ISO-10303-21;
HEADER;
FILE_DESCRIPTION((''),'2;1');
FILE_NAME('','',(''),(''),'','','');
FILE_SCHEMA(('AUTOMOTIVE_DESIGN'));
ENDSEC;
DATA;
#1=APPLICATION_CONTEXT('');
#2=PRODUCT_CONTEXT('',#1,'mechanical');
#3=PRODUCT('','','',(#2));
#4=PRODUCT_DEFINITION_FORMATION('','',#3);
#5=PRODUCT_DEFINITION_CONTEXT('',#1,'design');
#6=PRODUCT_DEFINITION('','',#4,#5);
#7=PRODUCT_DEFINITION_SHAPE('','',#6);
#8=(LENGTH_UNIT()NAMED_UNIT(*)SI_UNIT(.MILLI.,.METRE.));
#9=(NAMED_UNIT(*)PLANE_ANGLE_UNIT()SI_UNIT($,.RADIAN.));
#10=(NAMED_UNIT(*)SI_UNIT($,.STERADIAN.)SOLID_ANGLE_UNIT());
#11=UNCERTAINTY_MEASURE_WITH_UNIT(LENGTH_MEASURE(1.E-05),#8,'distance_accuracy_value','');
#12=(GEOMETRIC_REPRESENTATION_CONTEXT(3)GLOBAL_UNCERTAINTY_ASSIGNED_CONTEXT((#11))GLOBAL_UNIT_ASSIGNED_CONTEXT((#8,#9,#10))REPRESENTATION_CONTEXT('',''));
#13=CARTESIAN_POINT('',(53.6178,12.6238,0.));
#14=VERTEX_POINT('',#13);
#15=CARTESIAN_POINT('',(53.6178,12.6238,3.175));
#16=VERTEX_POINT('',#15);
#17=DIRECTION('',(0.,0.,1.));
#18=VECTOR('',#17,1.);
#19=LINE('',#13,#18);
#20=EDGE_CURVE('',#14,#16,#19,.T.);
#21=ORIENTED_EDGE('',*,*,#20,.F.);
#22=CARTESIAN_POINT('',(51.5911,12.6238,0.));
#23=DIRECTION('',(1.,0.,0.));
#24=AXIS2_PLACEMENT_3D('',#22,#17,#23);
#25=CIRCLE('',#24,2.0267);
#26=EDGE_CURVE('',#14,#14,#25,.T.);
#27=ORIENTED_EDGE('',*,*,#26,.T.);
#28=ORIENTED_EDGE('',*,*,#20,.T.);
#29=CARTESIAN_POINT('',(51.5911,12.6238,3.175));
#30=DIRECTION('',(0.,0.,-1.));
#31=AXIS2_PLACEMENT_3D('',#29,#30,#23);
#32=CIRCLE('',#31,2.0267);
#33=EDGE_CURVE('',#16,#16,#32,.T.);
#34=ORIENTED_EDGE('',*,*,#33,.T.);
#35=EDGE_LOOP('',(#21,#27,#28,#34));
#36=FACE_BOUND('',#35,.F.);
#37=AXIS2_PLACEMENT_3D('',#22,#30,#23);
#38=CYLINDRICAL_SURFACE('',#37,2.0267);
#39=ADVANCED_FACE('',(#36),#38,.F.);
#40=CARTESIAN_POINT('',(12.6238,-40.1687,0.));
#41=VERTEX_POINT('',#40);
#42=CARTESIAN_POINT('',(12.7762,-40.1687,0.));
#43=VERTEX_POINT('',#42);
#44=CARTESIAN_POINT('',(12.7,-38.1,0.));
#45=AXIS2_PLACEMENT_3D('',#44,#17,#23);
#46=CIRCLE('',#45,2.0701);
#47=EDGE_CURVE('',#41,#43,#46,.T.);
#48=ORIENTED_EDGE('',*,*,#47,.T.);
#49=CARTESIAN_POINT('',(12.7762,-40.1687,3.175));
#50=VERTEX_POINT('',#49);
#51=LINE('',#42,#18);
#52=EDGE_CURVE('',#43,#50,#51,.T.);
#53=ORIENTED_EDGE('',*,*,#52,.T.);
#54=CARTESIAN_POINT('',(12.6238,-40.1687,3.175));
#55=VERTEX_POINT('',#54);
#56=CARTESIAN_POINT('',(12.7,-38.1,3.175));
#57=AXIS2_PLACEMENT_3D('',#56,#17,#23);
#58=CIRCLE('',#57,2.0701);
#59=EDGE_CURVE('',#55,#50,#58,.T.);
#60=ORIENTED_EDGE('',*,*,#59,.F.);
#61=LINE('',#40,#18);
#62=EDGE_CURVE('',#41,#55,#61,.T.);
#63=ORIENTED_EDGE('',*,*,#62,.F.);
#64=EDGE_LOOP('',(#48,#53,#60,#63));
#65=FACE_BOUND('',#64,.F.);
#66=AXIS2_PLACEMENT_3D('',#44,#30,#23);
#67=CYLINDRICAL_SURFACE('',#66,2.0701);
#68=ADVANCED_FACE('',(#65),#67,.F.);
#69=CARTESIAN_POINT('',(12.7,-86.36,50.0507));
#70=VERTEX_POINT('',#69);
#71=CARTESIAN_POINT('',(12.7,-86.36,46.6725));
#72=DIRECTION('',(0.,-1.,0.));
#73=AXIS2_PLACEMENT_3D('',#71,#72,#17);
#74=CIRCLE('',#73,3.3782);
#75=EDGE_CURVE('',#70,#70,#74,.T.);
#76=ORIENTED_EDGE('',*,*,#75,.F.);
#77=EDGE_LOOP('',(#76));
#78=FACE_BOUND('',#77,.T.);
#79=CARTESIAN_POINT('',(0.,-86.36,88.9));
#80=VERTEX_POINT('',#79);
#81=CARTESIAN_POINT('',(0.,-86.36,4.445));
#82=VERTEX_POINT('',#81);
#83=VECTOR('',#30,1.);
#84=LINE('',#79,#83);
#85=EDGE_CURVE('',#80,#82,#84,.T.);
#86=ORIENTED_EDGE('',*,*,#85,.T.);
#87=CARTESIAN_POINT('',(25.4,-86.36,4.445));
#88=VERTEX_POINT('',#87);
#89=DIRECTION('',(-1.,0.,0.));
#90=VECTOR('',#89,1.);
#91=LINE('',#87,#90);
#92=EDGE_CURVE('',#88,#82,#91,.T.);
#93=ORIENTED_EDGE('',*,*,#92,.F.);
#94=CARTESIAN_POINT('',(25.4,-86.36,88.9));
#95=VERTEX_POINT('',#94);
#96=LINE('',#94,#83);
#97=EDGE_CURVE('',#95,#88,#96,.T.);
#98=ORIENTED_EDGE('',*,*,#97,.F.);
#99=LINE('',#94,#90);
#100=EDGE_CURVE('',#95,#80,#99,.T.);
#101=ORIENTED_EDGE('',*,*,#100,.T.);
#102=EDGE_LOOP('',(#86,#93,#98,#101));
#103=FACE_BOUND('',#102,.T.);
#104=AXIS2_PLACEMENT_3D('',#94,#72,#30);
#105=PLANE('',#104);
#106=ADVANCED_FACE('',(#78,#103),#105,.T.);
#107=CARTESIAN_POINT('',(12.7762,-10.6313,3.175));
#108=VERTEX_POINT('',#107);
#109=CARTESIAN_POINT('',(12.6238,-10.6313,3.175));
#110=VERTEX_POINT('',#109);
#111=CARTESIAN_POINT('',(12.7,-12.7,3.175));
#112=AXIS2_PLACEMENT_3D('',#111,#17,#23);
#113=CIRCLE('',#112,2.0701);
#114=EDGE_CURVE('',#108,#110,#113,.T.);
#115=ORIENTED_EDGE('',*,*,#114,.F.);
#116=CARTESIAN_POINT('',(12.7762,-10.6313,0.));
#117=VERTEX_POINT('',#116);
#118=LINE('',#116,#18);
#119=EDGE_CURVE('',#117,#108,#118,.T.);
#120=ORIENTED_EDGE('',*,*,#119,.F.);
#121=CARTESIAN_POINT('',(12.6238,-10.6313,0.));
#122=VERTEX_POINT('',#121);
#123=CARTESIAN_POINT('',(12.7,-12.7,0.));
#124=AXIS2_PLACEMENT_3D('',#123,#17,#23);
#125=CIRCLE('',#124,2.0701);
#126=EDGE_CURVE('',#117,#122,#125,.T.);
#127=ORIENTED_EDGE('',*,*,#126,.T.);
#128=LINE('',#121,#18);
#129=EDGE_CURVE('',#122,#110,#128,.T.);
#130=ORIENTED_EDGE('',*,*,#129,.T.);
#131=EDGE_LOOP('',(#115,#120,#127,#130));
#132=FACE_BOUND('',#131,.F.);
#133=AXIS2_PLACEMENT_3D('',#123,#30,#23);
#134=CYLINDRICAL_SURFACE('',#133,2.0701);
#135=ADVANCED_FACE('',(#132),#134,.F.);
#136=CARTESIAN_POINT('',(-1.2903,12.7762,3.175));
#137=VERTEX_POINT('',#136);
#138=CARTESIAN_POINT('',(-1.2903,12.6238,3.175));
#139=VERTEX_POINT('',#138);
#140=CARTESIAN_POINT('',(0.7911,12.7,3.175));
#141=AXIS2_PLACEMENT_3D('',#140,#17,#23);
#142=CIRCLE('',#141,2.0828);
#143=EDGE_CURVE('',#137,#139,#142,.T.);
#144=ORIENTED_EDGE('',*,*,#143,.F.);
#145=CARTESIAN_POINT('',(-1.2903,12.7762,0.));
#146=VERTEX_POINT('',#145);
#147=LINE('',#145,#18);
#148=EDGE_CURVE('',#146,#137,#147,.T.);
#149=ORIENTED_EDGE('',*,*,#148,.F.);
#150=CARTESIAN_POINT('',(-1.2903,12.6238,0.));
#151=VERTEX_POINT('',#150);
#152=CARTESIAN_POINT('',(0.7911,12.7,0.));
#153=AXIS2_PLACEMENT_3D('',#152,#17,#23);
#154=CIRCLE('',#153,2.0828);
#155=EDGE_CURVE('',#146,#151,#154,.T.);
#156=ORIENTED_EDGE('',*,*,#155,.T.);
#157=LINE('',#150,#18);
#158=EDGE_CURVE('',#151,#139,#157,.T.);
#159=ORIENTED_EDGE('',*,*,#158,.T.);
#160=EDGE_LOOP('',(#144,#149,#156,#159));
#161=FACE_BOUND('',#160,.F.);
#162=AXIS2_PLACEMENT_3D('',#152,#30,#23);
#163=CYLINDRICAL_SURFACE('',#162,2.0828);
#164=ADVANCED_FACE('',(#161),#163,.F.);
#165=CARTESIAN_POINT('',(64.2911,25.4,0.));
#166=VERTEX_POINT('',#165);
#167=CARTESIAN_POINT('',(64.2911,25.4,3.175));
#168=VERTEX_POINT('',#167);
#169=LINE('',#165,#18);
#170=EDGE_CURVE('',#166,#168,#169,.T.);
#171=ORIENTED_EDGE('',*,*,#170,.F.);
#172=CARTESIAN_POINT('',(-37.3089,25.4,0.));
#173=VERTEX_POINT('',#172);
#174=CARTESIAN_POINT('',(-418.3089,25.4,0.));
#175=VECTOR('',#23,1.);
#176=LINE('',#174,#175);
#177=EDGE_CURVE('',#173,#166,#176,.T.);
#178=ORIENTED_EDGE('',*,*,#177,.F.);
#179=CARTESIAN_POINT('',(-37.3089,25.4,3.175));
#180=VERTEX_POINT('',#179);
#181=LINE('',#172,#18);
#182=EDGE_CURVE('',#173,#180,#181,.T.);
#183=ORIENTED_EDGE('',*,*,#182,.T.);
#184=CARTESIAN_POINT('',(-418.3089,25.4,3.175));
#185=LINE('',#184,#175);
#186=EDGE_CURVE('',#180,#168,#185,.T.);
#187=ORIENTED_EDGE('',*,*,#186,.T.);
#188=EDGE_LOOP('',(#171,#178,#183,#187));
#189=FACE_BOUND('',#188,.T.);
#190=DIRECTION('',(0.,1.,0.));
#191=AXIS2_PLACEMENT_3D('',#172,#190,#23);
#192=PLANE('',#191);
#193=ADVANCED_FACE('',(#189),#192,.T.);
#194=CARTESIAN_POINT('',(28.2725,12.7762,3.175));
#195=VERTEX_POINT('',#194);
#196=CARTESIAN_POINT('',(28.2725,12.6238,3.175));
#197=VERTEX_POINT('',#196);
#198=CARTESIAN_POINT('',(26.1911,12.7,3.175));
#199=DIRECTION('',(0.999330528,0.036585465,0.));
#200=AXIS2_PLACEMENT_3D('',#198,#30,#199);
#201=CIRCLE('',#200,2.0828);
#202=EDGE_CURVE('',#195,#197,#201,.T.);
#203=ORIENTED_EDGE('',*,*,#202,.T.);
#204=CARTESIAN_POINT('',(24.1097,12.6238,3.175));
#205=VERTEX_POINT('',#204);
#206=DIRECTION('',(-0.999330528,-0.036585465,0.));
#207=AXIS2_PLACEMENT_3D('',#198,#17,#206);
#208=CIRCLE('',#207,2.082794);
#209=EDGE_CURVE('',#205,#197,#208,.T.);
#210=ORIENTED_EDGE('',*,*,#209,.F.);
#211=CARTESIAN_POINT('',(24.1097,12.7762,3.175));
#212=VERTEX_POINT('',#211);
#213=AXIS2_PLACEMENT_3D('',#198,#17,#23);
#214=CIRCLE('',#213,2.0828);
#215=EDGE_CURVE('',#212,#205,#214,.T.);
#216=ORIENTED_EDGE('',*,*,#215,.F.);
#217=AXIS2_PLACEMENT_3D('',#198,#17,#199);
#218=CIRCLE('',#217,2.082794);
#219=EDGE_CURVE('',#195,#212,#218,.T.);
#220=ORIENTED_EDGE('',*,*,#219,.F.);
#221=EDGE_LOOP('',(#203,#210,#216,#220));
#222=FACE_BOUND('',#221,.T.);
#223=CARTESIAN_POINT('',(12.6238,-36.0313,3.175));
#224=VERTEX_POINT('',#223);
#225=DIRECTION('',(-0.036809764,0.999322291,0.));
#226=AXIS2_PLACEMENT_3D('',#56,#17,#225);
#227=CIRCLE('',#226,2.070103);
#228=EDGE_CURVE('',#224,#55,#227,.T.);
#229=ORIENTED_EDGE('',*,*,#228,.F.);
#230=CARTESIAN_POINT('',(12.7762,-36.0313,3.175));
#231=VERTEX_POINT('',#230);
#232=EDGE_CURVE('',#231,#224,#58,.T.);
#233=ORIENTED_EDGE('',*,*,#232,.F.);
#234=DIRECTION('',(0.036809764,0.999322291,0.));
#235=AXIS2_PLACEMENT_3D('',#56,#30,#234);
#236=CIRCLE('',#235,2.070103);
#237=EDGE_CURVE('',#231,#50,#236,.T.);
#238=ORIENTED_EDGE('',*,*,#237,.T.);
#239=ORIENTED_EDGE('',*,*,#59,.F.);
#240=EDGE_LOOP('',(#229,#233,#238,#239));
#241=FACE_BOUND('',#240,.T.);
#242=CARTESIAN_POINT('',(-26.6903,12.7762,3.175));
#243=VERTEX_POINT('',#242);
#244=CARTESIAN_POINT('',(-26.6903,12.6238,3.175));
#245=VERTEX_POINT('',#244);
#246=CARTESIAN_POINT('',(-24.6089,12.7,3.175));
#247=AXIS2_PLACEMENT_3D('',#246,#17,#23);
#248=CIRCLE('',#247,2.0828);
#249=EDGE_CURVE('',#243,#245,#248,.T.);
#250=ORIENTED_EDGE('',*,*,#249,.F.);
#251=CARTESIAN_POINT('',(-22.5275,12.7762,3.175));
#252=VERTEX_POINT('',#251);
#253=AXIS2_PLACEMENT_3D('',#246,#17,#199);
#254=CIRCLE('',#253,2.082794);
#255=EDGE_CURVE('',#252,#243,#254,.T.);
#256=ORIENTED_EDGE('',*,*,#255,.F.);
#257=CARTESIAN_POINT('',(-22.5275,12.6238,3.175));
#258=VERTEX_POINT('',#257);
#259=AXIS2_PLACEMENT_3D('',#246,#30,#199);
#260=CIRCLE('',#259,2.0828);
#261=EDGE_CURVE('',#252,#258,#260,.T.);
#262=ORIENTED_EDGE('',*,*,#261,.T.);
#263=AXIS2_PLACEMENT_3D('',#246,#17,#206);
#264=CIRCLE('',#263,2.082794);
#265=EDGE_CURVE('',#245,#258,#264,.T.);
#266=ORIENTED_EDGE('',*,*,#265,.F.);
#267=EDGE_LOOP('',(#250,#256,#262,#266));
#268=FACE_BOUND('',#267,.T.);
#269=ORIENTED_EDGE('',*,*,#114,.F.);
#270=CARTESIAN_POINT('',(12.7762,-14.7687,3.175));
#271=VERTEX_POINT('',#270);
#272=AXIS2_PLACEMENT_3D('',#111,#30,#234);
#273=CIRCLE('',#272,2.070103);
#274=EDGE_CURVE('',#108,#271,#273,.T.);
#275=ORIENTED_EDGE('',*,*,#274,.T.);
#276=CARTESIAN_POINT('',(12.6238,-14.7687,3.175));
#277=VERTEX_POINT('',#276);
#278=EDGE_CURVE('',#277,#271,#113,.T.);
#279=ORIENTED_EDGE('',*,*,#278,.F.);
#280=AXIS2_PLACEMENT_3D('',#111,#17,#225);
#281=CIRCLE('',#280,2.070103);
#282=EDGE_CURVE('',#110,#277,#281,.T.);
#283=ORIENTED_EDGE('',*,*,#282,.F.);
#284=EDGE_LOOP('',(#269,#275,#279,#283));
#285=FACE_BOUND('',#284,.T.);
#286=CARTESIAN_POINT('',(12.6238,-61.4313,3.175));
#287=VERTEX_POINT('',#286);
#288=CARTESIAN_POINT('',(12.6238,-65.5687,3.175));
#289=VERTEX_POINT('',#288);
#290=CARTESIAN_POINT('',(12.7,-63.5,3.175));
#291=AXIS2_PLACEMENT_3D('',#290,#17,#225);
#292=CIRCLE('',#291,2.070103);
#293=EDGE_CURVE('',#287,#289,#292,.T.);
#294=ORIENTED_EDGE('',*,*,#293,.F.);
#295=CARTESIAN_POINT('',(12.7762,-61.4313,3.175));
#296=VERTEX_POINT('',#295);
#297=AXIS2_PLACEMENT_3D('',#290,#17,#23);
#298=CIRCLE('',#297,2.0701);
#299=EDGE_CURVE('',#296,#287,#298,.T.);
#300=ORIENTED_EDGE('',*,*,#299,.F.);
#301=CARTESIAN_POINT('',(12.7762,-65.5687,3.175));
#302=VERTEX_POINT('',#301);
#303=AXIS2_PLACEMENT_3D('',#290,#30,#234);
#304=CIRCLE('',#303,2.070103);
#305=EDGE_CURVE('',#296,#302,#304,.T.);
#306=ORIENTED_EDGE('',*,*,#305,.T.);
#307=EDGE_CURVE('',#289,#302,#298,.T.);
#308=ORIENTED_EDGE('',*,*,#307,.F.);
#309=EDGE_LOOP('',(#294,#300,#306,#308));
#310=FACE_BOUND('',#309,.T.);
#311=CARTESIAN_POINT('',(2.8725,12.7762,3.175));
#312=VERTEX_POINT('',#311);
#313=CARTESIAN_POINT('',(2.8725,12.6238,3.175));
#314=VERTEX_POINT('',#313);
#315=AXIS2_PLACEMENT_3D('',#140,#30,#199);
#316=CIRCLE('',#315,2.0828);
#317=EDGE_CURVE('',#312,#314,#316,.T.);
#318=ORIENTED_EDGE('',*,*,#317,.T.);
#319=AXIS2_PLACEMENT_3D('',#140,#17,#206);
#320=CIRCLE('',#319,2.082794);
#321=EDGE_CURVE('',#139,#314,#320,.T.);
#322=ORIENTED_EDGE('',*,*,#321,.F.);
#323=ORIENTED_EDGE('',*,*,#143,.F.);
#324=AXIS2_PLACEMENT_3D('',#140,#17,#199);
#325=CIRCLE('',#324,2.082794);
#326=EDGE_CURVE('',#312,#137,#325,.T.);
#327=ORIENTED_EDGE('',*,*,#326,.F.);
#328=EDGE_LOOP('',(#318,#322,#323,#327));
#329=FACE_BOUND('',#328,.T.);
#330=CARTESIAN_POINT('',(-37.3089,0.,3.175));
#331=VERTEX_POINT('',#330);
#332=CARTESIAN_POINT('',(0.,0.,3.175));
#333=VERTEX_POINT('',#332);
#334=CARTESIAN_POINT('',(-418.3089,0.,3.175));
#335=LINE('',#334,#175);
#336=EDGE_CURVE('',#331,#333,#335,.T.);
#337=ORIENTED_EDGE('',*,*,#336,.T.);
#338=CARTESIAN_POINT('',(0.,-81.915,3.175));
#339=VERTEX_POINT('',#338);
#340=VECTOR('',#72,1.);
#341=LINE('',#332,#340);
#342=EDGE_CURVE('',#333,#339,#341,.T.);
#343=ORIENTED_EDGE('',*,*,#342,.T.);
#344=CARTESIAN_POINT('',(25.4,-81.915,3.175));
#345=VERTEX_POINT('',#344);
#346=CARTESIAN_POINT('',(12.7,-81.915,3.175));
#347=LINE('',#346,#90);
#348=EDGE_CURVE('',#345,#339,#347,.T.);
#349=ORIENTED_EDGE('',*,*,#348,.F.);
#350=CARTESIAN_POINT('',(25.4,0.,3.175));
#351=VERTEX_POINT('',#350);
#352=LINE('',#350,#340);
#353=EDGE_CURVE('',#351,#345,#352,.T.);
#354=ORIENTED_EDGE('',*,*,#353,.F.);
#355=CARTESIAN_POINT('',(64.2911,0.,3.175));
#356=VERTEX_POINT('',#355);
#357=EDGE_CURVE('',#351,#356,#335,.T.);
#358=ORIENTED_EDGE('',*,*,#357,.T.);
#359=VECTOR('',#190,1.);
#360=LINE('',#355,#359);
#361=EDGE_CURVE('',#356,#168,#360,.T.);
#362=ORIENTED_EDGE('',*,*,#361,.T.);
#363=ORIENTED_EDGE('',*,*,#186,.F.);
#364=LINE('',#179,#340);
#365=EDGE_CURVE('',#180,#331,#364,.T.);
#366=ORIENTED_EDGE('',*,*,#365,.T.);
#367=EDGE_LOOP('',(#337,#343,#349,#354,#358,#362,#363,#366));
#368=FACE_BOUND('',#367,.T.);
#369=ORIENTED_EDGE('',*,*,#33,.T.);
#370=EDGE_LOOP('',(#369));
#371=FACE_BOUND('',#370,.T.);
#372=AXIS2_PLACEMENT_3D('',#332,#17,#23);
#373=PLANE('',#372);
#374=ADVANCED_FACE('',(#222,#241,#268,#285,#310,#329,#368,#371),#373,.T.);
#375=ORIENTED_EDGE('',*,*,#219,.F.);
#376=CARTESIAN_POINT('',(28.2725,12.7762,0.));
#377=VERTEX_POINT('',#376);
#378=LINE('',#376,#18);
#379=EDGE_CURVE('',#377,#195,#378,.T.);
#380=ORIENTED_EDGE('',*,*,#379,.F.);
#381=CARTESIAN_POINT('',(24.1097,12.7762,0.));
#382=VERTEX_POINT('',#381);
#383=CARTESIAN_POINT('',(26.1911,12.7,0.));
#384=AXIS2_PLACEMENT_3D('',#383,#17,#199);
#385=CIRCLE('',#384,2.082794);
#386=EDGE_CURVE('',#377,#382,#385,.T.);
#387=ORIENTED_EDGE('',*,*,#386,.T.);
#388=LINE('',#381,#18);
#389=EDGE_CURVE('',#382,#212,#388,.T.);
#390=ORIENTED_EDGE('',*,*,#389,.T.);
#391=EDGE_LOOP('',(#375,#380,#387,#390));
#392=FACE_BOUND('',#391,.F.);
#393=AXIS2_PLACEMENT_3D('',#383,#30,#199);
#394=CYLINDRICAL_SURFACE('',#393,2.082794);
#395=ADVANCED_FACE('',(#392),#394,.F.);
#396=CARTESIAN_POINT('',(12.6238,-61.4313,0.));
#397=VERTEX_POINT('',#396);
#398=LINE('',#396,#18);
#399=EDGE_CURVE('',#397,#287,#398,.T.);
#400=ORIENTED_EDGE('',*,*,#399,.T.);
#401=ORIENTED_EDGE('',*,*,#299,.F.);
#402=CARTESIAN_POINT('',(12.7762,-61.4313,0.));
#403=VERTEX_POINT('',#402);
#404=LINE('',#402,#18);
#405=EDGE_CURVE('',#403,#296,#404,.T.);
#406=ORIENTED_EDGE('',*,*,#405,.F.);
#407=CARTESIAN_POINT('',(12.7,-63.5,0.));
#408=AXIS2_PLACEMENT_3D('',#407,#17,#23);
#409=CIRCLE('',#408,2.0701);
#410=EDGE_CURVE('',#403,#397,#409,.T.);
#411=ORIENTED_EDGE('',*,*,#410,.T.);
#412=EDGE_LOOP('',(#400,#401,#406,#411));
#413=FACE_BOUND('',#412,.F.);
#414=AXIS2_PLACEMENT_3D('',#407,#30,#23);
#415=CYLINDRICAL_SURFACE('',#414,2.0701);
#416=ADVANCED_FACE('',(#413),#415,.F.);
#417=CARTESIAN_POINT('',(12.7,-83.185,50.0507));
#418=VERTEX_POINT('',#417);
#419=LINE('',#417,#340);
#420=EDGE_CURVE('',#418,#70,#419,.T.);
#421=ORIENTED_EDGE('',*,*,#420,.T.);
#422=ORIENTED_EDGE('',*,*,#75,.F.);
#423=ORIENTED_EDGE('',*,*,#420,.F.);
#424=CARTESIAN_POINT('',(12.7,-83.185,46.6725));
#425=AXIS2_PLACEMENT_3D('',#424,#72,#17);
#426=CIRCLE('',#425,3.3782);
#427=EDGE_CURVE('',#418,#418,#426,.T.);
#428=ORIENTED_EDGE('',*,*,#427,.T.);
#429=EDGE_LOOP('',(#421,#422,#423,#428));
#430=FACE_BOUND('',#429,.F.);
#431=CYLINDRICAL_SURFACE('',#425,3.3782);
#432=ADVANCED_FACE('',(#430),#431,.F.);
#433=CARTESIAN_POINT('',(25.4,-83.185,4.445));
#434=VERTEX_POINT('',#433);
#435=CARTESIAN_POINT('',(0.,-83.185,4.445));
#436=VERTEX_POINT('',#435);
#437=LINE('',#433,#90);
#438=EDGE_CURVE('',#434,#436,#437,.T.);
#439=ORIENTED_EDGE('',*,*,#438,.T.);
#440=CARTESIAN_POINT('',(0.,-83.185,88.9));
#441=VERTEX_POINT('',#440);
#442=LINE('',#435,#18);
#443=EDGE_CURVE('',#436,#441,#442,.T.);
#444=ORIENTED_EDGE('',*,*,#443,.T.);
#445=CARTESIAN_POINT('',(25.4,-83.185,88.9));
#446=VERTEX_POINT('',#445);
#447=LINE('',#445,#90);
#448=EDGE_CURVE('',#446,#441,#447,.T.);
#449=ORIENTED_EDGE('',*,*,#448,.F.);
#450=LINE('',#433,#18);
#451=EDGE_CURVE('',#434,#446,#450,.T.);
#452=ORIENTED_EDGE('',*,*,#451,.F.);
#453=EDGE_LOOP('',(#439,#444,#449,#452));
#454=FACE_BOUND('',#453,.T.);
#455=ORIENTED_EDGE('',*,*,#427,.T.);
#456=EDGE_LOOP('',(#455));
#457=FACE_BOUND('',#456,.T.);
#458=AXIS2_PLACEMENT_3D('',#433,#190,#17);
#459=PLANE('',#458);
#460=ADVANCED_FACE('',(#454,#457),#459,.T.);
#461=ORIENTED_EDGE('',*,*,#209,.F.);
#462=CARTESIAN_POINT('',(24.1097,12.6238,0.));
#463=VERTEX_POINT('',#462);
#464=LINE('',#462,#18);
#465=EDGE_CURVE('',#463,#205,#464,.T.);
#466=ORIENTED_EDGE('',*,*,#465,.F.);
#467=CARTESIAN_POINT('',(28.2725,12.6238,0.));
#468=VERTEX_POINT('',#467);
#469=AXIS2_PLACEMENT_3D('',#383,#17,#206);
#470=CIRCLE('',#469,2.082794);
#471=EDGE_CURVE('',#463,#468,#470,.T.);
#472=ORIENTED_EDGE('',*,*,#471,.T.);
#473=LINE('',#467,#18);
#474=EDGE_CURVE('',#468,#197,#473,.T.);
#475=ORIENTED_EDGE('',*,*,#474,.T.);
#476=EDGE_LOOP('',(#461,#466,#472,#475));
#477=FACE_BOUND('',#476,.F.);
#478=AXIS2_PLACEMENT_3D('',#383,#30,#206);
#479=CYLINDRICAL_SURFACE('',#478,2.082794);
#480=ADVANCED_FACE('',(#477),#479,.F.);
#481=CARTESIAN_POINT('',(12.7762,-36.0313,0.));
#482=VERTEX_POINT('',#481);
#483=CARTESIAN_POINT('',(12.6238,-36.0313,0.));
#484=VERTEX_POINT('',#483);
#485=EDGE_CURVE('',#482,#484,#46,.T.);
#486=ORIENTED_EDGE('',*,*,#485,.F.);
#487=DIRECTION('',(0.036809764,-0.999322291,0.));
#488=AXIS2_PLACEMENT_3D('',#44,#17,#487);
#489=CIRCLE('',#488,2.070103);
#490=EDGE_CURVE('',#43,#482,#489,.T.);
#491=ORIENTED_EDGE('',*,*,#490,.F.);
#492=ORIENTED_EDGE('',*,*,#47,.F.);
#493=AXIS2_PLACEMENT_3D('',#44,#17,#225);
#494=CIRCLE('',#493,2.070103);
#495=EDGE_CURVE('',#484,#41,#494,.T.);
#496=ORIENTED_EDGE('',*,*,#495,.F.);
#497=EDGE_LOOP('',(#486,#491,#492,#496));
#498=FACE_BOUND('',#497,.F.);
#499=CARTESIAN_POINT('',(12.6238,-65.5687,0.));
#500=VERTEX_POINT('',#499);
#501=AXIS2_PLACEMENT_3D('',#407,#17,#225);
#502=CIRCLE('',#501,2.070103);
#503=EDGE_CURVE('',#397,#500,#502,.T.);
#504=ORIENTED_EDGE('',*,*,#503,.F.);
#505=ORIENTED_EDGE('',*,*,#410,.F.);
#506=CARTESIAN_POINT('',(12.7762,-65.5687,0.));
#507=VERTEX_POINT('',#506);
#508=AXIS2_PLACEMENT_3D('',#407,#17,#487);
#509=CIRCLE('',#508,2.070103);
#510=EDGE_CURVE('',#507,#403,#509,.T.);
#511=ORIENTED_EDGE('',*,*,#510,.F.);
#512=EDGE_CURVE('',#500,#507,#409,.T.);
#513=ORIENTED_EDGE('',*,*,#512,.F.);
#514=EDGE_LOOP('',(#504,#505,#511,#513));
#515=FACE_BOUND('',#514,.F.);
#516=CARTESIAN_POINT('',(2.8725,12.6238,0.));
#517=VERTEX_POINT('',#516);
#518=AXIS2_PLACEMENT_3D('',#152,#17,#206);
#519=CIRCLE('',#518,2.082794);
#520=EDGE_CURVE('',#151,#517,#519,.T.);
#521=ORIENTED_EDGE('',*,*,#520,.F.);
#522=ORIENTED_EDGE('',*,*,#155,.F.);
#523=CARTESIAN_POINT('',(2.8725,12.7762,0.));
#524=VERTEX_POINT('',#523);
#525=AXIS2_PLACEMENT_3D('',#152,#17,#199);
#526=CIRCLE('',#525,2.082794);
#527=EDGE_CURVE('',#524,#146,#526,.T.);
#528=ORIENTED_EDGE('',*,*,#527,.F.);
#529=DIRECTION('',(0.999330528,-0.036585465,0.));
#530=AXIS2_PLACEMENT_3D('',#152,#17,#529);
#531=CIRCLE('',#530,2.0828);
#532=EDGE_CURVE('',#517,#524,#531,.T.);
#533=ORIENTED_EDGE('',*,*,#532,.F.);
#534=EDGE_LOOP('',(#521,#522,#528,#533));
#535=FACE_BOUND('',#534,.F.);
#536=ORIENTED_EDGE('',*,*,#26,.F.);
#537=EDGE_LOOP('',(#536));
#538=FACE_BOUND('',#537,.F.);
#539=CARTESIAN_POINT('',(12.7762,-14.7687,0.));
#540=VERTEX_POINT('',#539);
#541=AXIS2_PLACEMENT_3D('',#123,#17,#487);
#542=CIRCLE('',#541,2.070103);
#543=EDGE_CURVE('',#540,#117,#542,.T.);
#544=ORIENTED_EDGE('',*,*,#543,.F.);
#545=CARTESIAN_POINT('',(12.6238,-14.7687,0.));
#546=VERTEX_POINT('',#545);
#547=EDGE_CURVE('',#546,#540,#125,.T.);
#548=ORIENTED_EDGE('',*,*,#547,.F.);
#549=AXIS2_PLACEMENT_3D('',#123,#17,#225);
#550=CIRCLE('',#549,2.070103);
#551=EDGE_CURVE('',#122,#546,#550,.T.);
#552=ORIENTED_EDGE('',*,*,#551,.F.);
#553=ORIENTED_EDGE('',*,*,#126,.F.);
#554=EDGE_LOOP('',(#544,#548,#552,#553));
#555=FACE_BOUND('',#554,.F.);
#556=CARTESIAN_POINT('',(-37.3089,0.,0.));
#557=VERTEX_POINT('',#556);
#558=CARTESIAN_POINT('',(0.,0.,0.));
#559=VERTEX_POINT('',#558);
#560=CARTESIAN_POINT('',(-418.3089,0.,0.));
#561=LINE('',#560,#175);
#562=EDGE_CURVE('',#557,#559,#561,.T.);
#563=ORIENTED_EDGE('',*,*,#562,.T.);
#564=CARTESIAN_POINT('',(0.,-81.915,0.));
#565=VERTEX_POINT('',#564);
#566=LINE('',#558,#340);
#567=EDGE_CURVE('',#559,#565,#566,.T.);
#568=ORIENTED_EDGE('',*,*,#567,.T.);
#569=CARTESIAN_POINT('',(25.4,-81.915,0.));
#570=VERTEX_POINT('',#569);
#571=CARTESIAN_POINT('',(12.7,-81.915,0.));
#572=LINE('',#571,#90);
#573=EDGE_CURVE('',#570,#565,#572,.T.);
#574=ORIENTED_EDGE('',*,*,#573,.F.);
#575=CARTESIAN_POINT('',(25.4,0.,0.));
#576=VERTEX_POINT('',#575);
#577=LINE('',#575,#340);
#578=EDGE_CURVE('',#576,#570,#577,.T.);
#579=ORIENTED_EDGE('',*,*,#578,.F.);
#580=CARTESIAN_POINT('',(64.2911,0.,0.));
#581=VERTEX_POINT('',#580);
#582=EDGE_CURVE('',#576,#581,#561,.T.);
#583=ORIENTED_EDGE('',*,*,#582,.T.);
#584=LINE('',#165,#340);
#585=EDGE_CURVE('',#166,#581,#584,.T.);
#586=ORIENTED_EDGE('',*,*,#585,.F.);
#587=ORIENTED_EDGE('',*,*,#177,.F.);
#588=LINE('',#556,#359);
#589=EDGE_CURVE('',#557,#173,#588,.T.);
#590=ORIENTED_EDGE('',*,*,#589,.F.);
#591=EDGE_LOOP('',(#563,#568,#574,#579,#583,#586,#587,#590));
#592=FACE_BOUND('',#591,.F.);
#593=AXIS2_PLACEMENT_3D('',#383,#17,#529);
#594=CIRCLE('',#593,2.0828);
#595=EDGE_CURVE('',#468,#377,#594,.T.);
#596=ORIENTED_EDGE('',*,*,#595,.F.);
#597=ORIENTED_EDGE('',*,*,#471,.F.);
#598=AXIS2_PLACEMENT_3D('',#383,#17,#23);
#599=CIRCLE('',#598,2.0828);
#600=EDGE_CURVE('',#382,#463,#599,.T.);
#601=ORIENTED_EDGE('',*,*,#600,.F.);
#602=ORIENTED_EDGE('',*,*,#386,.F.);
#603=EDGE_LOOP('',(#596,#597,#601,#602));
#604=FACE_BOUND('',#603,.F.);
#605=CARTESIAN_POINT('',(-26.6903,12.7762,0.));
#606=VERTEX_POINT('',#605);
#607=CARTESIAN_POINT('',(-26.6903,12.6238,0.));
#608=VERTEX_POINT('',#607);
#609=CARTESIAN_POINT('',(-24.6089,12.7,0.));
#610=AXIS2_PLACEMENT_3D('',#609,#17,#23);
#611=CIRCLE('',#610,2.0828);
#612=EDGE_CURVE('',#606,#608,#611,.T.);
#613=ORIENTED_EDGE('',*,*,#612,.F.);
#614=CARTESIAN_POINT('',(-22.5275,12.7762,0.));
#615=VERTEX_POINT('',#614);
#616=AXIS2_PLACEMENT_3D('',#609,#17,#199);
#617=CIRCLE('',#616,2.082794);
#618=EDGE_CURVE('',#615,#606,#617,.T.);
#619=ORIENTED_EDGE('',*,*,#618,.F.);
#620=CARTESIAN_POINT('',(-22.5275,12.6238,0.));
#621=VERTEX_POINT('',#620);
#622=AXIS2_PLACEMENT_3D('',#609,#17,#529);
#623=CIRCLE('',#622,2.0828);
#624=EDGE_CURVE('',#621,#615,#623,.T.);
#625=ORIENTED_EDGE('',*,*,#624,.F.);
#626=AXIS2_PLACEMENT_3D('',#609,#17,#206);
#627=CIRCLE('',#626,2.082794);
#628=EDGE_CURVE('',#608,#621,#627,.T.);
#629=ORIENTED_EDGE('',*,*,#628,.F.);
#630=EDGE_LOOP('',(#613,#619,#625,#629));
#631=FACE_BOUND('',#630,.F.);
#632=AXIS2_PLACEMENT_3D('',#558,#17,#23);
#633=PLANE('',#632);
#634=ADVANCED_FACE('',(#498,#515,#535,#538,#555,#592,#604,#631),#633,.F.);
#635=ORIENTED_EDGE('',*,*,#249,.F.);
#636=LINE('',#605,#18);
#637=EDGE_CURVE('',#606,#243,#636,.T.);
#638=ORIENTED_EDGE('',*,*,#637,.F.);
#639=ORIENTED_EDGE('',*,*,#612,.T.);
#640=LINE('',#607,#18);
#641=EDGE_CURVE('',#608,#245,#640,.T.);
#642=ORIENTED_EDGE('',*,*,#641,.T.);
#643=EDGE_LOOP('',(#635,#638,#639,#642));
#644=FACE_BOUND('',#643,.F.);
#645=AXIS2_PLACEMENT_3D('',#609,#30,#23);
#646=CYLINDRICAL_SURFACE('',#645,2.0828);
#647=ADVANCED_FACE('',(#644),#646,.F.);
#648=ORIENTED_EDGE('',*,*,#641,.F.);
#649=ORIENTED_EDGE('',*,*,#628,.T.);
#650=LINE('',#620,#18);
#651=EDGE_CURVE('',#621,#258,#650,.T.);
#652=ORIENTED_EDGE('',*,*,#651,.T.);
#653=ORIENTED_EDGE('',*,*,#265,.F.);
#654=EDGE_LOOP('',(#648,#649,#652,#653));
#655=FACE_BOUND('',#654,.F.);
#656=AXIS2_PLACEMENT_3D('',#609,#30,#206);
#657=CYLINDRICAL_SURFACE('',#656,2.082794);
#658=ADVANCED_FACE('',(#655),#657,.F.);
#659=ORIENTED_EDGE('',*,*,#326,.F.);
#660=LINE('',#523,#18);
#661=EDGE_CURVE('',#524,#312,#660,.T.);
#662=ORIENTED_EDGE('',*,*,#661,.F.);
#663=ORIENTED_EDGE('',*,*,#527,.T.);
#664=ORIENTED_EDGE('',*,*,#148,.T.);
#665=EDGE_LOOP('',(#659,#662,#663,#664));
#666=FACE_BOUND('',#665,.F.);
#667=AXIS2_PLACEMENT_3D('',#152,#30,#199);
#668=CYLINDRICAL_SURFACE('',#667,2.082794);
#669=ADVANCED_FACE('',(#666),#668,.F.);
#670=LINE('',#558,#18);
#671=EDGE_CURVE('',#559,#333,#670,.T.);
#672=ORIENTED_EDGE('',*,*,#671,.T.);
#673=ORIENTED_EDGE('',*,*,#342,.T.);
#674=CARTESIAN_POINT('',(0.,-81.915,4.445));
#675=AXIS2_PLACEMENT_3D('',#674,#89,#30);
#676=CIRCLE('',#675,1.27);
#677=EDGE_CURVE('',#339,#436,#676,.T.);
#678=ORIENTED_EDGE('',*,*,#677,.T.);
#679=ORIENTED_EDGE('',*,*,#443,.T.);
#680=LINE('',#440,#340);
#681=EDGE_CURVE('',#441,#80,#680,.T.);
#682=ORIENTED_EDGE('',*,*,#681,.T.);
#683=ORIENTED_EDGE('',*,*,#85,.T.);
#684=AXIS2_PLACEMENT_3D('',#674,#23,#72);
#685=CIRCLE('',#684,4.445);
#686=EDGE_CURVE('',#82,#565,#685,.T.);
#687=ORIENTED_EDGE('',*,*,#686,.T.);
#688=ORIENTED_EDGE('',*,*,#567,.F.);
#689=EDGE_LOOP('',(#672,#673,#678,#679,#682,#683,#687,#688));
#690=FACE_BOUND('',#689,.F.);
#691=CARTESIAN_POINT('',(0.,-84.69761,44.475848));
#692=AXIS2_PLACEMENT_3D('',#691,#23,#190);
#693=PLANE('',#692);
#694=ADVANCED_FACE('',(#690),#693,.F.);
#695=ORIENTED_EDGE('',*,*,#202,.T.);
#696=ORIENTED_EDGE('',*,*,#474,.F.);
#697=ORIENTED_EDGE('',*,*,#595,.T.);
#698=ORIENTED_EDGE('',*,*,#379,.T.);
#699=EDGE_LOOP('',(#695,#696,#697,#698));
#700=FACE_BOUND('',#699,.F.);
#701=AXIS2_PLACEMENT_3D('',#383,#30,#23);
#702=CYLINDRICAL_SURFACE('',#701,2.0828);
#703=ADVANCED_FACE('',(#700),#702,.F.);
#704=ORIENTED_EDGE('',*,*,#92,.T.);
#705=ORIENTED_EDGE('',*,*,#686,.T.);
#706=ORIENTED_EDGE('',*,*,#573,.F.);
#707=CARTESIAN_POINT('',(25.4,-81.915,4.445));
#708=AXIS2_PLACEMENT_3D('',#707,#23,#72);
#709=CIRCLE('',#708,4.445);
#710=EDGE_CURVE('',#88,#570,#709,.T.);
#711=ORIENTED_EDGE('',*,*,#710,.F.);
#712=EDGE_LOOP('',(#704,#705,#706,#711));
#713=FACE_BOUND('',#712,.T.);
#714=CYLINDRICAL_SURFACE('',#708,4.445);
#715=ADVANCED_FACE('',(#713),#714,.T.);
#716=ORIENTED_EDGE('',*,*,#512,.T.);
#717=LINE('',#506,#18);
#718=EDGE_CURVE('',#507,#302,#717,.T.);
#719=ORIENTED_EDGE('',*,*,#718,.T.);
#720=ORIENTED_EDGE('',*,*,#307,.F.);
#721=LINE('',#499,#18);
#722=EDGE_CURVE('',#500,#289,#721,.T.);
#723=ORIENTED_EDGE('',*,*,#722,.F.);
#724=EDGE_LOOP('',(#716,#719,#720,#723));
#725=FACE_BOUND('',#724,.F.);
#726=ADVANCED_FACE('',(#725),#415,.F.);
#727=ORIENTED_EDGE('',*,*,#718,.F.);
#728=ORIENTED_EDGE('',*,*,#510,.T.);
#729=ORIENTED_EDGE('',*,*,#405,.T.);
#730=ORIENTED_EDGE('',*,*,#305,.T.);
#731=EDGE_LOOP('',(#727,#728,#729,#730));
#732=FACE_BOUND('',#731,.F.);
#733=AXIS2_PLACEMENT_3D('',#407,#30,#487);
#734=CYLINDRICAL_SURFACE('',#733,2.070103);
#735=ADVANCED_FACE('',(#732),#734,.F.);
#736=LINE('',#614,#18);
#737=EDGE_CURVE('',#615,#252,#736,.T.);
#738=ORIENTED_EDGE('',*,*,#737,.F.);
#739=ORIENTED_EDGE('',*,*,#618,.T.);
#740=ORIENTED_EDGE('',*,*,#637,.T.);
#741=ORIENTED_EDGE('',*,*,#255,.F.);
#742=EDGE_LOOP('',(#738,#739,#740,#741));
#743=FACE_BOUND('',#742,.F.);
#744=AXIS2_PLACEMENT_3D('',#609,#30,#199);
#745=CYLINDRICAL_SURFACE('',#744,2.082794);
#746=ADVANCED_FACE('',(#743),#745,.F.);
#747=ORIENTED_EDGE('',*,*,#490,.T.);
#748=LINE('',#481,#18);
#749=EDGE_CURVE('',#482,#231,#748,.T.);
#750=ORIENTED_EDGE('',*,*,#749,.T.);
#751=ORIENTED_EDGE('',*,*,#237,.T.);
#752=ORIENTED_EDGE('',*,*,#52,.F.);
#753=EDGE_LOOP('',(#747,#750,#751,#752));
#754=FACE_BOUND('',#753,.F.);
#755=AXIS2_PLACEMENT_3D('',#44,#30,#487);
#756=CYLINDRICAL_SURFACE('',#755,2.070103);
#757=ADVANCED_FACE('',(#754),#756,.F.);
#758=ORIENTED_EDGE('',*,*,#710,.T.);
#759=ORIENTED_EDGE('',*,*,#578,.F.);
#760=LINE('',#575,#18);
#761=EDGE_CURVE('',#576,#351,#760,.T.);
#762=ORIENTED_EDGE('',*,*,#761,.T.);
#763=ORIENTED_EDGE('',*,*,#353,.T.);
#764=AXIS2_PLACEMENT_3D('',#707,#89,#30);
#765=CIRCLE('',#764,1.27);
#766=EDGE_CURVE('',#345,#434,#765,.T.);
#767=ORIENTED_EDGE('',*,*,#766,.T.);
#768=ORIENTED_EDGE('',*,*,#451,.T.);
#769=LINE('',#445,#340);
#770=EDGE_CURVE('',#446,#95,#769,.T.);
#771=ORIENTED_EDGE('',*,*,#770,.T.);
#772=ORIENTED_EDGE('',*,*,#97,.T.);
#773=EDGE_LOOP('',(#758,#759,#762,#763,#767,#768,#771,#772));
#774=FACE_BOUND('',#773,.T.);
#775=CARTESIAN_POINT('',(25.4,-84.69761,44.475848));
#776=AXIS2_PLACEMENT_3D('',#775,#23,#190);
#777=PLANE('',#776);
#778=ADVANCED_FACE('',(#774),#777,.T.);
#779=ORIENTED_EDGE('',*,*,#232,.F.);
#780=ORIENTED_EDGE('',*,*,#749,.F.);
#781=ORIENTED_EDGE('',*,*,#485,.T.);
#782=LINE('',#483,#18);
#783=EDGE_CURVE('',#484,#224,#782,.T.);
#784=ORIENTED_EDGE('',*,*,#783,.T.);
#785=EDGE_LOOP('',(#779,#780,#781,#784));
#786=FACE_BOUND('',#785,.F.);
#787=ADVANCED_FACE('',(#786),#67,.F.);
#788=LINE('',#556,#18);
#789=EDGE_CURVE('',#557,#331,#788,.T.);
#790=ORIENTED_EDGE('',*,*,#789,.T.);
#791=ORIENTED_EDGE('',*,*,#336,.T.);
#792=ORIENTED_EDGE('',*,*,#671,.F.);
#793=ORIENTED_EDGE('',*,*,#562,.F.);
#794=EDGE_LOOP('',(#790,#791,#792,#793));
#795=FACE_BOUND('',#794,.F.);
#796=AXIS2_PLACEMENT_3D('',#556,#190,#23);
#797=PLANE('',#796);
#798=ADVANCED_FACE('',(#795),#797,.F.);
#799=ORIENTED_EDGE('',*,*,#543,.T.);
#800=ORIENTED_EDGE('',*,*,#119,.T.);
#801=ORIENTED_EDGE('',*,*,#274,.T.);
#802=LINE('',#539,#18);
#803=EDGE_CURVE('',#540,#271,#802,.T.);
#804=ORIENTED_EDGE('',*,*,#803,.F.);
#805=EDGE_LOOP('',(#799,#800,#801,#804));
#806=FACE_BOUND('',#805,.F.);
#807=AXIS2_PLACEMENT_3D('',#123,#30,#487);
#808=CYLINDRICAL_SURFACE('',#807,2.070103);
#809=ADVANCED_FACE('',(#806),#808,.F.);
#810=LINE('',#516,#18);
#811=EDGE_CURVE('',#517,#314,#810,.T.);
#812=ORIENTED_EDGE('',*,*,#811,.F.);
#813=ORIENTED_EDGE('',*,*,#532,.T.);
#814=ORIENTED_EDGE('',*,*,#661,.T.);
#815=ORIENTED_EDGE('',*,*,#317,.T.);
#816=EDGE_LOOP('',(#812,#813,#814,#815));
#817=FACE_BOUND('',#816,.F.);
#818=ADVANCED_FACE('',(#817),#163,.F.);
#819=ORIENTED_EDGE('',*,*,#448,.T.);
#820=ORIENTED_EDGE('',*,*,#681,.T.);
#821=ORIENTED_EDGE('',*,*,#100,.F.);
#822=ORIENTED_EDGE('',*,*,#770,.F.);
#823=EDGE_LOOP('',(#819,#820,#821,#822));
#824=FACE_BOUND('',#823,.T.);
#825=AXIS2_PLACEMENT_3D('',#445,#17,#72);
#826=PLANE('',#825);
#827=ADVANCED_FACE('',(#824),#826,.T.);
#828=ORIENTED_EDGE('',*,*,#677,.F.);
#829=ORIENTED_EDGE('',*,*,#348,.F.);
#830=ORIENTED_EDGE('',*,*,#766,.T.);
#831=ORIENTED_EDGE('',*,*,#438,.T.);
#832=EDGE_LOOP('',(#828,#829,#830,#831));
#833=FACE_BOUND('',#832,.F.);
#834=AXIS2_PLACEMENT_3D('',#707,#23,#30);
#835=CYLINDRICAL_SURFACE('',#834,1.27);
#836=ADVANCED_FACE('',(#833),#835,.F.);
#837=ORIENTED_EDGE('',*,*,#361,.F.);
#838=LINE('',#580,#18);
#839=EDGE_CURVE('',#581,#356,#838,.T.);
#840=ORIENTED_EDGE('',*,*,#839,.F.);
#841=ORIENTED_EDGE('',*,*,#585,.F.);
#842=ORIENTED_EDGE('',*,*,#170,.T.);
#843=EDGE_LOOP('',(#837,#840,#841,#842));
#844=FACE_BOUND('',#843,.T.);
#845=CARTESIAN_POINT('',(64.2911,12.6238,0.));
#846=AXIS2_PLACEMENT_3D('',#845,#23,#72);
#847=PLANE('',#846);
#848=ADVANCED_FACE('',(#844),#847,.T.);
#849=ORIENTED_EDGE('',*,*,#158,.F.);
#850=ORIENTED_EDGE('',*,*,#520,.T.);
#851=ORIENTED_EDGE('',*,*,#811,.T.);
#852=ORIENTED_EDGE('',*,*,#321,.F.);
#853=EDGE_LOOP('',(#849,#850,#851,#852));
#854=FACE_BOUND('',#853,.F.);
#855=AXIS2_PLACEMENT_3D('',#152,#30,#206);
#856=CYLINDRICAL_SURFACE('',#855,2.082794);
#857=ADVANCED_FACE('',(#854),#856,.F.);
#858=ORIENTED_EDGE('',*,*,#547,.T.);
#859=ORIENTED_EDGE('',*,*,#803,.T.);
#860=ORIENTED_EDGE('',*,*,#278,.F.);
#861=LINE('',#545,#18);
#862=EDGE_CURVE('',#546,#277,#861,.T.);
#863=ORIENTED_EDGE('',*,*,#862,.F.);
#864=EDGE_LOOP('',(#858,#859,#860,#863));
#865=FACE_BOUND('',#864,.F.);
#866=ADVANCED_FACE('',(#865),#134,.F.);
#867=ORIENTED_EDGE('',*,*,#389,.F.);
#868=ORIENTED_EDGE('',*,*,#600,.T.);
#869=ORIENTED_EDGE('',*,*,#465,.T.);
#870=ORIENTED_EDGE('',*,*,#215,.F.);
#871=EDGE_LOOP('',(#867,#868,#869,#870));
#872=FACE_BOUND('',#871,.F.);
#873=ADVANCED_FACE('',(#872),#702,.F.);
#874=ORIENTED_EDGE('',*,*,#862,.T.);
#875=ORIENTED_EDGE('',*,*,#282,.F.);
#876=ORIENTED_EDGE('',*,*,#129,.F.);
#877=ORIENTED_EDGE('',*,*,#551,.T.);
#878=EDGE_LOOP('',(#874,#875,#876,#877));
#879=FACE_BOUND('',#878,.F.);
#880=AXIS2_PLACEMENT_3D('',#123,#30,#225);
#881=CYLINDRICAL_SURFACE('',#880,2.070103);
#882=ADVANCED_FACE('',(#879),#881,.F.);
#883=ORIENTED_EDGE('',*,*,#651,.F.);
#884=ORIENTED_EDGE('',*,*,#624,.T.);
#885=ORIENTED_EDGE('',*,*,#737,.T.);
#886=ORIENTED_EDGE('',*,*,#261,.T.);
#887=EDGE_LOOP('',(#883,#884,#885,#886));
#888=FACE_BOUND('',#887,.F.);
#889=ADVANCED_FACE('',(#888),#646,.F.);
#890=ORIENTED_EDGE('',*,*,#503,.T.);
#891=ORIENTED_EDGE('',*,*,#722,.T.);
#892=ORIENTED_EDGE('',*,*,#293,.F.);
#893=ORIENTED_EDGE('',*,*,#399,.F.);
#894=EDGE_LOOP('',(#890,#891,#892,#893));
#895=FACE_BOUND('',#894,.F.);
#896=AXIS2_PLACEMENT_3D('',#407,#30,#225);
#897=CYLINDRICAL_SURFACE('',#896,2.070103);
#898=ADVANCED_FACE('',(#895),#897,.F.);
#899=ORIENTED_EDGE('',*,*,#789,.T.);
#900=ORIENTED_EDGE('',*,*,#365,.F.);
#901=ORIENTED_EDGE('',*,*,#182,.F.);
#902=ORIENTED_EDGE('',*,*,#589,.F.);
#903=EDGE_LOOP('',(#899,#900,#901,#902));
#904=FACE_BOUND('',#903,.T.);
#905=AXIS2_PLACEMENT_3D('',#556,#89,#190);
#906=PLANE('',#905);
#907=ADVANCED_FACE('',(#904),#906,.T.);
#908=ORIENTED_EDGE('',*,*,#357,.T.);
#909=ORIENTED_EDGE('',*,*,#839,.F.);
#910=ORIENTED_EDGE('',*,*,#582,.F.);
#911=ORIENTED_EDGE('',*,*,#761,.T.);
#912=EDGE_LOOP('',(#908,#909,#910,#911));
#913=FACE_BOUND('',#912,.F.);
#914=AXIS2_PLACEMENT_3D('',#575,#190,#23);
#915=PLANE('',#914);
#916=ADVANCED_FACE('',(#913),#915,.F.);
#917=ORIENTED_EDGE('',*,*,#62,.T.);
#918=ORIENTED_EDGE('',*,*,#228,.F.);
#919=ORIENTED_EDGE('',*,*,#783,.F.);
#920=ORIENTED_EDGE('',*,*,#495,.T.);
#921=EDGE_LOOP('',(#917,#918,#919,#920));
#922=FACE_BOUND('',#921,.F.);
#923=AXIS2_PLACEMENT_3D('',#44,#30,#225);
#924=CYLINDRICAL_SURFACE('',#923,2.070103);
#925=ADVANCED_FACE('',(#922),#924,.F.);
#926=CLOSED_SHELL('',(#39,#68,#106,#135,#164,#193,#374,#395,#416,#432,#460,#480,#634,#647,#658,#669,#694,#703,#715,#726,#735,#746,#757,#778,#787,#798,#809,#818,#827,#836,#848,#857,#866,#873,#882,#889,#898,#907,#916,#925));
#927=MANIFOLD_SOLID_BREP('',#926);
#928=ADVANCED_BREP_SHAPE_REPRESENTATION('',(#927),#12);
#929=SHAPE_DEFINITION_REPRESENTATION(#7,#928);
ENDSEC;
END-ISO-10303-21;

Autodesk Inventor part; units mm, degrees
ref_plane "YZ Plane" through (0, 0, 0) normal (1, 0, 0) x (0, 1, 0)
ref_plane "XZ Plane" through (0, 0, 0) normal (0, 1, 0) x (-1, 0, 0)
ref_plane "XY Plane" through (0, 0, 0) normal (0, 0, 1) x (1, 0, 0)
sketch "Sketch1" plane through (0, 0, 0) normal (0, 0, 1) x (1, 0, 0)
  line L0 (0, -83.185) -> (12.6238, -83.185)
  line L1 (12.6238, -83.185) -> (12.6238, -65.5687)
  arc A0 (12.6238, -61.4313) -> (12.6238, -65.5687) centre (12.7, -63.5) ccw
  line L2 (12.6238, -61.4313) -> (12.6238, -40.1687)
  arc A1 (12.6238, -36.0313) -> (12.6238, -40.1687) centre (12.7, -38.1) ccw
  line L3 (12.6238, -36.0313) -> (12.6238, -14.7687)
  arc A2 (12.6238, -10.6313) -> (12.6238, -14.7687) centre (12.7, -12.7) ccw
  line L4 (12.6238, -10.6313) -> (12.6238, 0)
  line L5 (0, 0) -> (12.6238, 0)
  line L6 (0, 0) -> (0, -83.185)
  line L7 (12.7762, -83.185) -> (25.4, -83.185)
  line L8 (25.4, 0) -> (25.4, -83.185)
  line L9 (12.7762, 0) -> (25.4, 0)
  line L10 (12.7762, -10.6313) -> (12.7762, 0)
  arc A3 (12.7762, -14.7687) -> (12.7762, -10.6313) centre (12.7, -12.7) ccw
  line L11 (12.7762, -36.0313) -> (12.7762, -14.7687)
  arc A4 (12.7762, -40.1687) -> (12.7762, -36.0313) centre (12.7, -38.1) ccw
  line L12 (12.7762, -61.4313) -> (12.7762, -40.1687)
  arc A5 (12.7762, -65.5687) -> (12.7762, -61.4313) centre (12.7, -63.5) ccw
  line L13 (12.7762, -83.185) -> (12.7762, -65.5687)
  line L14 (216.6911, 0) -> (216.6911, 12.6238)
  line L15 (216.6911, 12.6238) -> (206.0725, 12.6238)
  arc A6 (201.9097, 12.6238) -> (206.0725, 12.6238) centre (203.9911, 12.7) ccw
  line L16 (201.9097, 12.6238) -> (180.6725, 12.6238)
  arc A7 (176.5097, 12.6238) -> (180.6725, 12.6238) centre (178.5911, 12.7) ccw
  line L17 (176.5097, 12.6238) -> (155.2725, 12.6238)
  arc A8 (151.1097, 12.6238) -> (155.2725, 12.6238) centre (153.1911, 12.7) ccw
  line L18 (151.1097, 12.6238) -> (129.8725, 12.6238)
  arc A9 (125.7097, 12.6238) -> (129.8725, 12.6238) centre (127.7911, 12.7) ccw
  line L19 (125.7097, 12.6238) -> (104.4725, 12.6238)
  arc A10 (100.3097, 12.6238) -> (104.4725, 12.6238) centre (102.3911, 12.7) ccw
  line L20 (100.3097, 12.6238) -> (79.0725, 12.6238)
  arc A11 (74.9097, 12.6238) -> (79.0725, 12.6238) centre (76.9911, 12.7) ccw
  line L21 (74.9097, 12.6238) -> (53.6725, 12.6238)
  arc A12 (49.5097, 12.6238) -> (53.6725, 12.6238) centre (51.5911, 12.7) ccw
  line L22 (49.5097, 12.6238) -> (28.2725, 12.6238)
  arc A13 (24.1097, 12.6238) -> (28.2725, 12.6238) centre (26.1911, 12.7) ccw
  line L23 (24.1097, 12.6238) -> (2.8725, 12.6238)
  arc A14 (-1.2903, 12.6238) -> (2.8725, 12.6238) centre (0.7911, 12.7) ccw
  line L24 (-1.2903, 12.6238) -> (-22.5275, 12.6238)
  arc A15 (-26.6903, 12.6238) -> (-22.5275, 12.6238) centre (-24.6089, 12.7) ccw
  line L25 (-26.6903, 12.6238) -> (-47.9275, 12.6238)
  arc A16 (-52.0903, 12.6238) -> (-47.9275, 12.6238) centre (-50.0089, 12.7) ccw
  line L26 (-52.0903, 12.6238) -> (-73.3275, 12.6238)
  arc A17 (-77.4903, 12.6238) -> (-73.3275, 12.6238) centre (-75.4089, 12.7) ccw
  line L27 (-77.4903, 12.6238) -> (-98.7275, 12.6238)
  arc A18 (-102.8903, 12.6238) -> (-98.7275, 12.6238) centre (-100.8089, 12.7) ccw
  line L28 (-102.8903, 12.6238) -> (-124.1275, 12.6238)
  arc A19 (-128.2903, 12.6238) -> (-124.1275, 12.6238) centre (-126.2089, 12.7) ccw
  line L29 (-128.2903, 12.6238) -> (-149.5275, 12.6238)
  arc A20 (-153.6903, 12.6238) -> (-149.5275, 12.6238) centre (-151.6089, 12.7) ccw
  line L30 (-153.6903, 12.6238) -> (-174.9275, 12.6238)
  arc A21 (-179.0903, 12.6238) -> (-174.9275, 12.6238) centre (-177.0089, 12.7) ccw
  line L31 (-179.0903, 12.6238) -> (-200.3275, 12.6238)
  arc A22 (-204.4903, 12.6238) -> (-200.3275, 12.6238) centre (-202.4089, 12.7) ccw
  line L32 (-204.4903, 12.6238) -> (-225.7275, 12.6238)
  arc A23 (-229.8903, 12.6238) -> (-225.7275, 12.6238) centre (-227.8089, 12.7) ccw
  line L33 (-229.8903, 12.6238) -> (-251.1275, 12.6238)
  arc A24 (-255.2903, 12.6238) -> (-251.1275, 12.6238) centre (-253.2089, 12.7) ccw
  line L34 (-255.2903, 12.6238) -> (-276.5275, 12.6238)
  arc A25 (-280.6903, 12.6238) -> (-276.5275, 12.6238) centre (-278.6089, 12.7) ccw
  line L35 (-280.6903, 12.6238) -> (-301.9275, 12.6238)
  arc A26 (-306.0903, 12.6238) -> (-301.9275, 12.6238) centre (-304.0089, 12.7) ccw
  line L36 (-306.0903, 12.6238) -> (-327.3275, 12.6238)
  arc A27 (-331.4903, 12.6238) -> (-327.3275, 12.6238) centre (-329.4089, 12.7) ccw
  line L37 (-331.4903, 12.6238) -> (-352.7275, 12.6238)
  arc A28 (-356.8903, 12.6238) -> (-352.7275, 12.6238) centre (-354.8089, 12.7) ccw
  line L38 (-356.8903, 12.6238) -> (-378.1275, 12.6238)
  arc A29 (-382.2903, 12.6238) -> (-378.1275, 12.6238) centre (-380.2089, 12.7) ccw
  line L39 (-382.2903, 12.6238) -> (-403.5275, 12.6238)
  arc A30 (-407.6903, 12.6238) -> (-403.5275, 12.6238) centre (-405.6089, 12.7) ccw
  line L40 (-407.6903, 12.6238) -> (-418.3089, 12.6238)
  line L41 (-418.3089, 12.6238) -> (-418.3089, 0)
  line L42 (-418.3089, 0) -> (216.6911, 0)
  line L43 (216.6911, 12.7762) -> (216.6911, 25.4)
  line L44 (-418.3089, 25.4) -> (216.6911, 25.4)
  line L45 (-418.3089, 25.4) -> (-418.3089, 12.7762)
  line L46 (-418.3089, 12.7762) -> (-407.6903, 12.7762)
  arc A31 (-403.5275, 12.7762) -> (-407.6903, 12.7762) centre (-405.6089, 12.7) ccw
  line L47 (-403.5275, 12.7762) -> (-382.2903, 12.7762)
  arc A32 (-378.1275, 12.7762) -> (-382.2903, 12.7762) centre (-380.2089, 12.7) ccw
  line L48 (-378.1275, 12.7762) -> (-356.8903, 12.7762)
  arc A33 (-352.7275, 12.7762) -> (-356.8903, 12.7762) centre (-354.8089, 12.7) ccw
  line L49 (-352.7275, 12.7762) -> (-331.4903, 12.7762)
  arc A34 (-327.3275, 12.7762) -> (-331.4903, 12.7762) centre (-329.4089, 12.7) ccw
  line L50 (-327.3275, 12.7762) -> (-306.0903, 12.7762)
  arc A35 (-301.9275, 12.7762) -> (-306.0903, 12.7762) centre (-304.0089, 12.7) ccw
  line L51 (-301.9275, 12.7762) -> (-280.6903, 12.7762)
  arc A36 (-276.5275, 12.7762) -> (-280.6903, 12.7762) centre (-278.6089, 12.7) ccw
  line L52 (-276.5275, 12.7762) -> (-255.2903, 12.7762)
  arc A37 (-251.1275, 12.7762) -> (-255.2903, 12.7762) centre (-253.2089, 12.7) ccw
  line L53 (-251.1275, 12.7762) -> (-229.8903, 12.7762)
  arc A38 (-225.7275, 12.7762) -> (-229.8903, 12.7762) centre (-227.8089, 12.7) ccw
  line L54 (-225.7275, 12.7762) -> (-204.4903, 12.7762)
  arc A39 (-200.3275, 12.7762) -> (-204.4903, 12.7762) centre (-202.4089, 12.7) ccw
  line L55 (-200.3275, 12.7762) -> (-179.0903, 12.7762)
  arc A40 (-174.9275, 12.7762) -> (-179.0903, 12.7762) centre (-177.0089, 12.7) ccw
  line L56 (-174.9275, 12.7762) -> (-153.6903, 12.7762)
  arc A41 (-149.5275, 12.7762) -> (-153.6903, 12.7762) centre (-151.6089, 12.7) ccw
  line L57 (-149.5275, 12.7762) -> (-128.2903, 12.7762)
  arc A42 (-124.1275, 12.7762) -> (-128.2903, 12.7762) centre (-126.2089, 12.7) ccw
  line L58 (-124.1275, 12.7762) -> (-102.8903, 12.7762)
  arc A43 (-98.7275, 12.7762) -> (-102.8903, 12.7762) centre (-100.8089, 12.7) ccw
  line L59 (-98.7275, 12.7762) -> (-77.4903, 12.7762)
  arc A44 (-73.3275, 12.7762) -> (-77.4903, 12.7762) centre (-75.4089, 12.7) ccw
  line L60 (-73.3275, 12.7762) -> (-52.0903, 12.7762)
  arc A45 (-47.9275, 12.7762) -> (-52.0903, 12.7762) centre (-50.0089, 12.7) ccw
  line L61 (-47.9275, 12.7762) -> (-26.6903, 12.7762)
  arc A46 (-22.5275, 12.7762) -> (-26.6903, 12.7762) centre (-24.6089, 12.7) ccw
  line L62 (-22.5275, 12.7762) -> (-1.2903, 12.7762)
  arc A47 (2.8725, 12.7762) -> (-1.2903, 12.7762) centre (0.7911, 12.7) ccw
  line L63 (2.8725, 12.7762) -> (24.1097, 12.7762)
  arc A48 (28.2725, 12.7762) -> (24.1097, 12.7762) centre (26.1911, 12.7) ccw
  line L64 (28.2725, 12.7762) -> (49.5097, 12.7762)
  arc A49 (53.6725, 12.7762) -> (49.5097, 12.7762) centre (51.5911, 12.7) ccw
  line L65 (53.6725, 12.7762) -> (74.9097, 12.7762)
  arc A50 (79.0725, 12.7762) -> (74.9097, 12.7762) centre (76.9911, 12.7) ccw
  line L66 (79.0725, 12.7762) -> (100.3097, 12.7762)
  arc A51 (104.4725, 12.7762) -> (100.3097, 12.7762) centre (102.3911, 12.7) ccw
  line L67 (104.4725, 12.7762) -> (125.7097, 12.7762)
  arc A52 (129.8725, 12.7762) -> (125.7097, 12.7762) centre (127.7911, 12.7) ccw
  line L68 (129.8725, 12.7762) -> (151.1097, 12.7762)
  arc A53 (155.2725, 12.7762) -> (151.1097, 12.7762) centre (153.1911, 12.7) ccw
  line L69 (155.2725, 12.7762) -> (176.5097, 12.7762)
  arc A54 (180.6725, 12.7762) -> (176.5097, 12.7762) centre (178.5911, 12.7) ccw
  line L70 (180.6725, 12.7762) -> (201.9097, 12.7762)
  arc A55 (206.0725, 12.7762) -> (201.9097, 12.7762) centre (203.9911, 12.7) ccw
  line L71 (206.0725, 12.7762) -> (216.6911, 12.7762)
  line L72 (-37.3089, 25.4) -> (64.2911, 25.4)
  line L73 (64.2911, 25.4) -> (64.2911, 0)
  line L74 (64.2911, 0) -> (-37.3089, 0)
  line L75 (-37.3089, 0) -> (-37.3089, 25.4)
  line L76 (0, 0) -> (25.4, 0)
  line L77 (25.4, 0) -> (25.4, -83.185)
  line L78 (25.4, -83.185) -> (0, -83.185)
  line L79 (0, -83.185) -> (0, 0)
  circle A56 centre (-24.6089, 12.7) radius 2.0828
  circle A57 centre (0.7911, 12.7) radius 2.0828
  circle A58 centre (26.1911, 12.7) radius 2.0828
  circle A59 centre (51.5911, 12.6238) radius 2.0267
  circle A60 centre (12.7, -12.7) radius 2.0701
  circle A61 centre (12.7, -38.1) radius 2.0701
  circle A62 centre (12.7, -63.5) radius 2.0701
  line L80 (242.0911, -84.7725) -> (-443.7089, -84.7725)
  line L81 (242.0911, -84.7725) -> (-443.7089, -84.7725)
  line L82 (-443.7089, -86.36) -> (-443.7089, -84.7725)
  line L83 (-442.1214, -86.36) -> (-443.7089, -86.36)
  line L84 (-442.1214, -86.36) -> (240.5036, -86.36)
  line L85 (242.0911, -86.36) -> (240.5036, -86.36)
  line L86 (242.0911, -84.7725) -> (242.0911, -86.36)
  line L87 (-442.1214, -137.16) -> (-442.1214, -86.36)
  line L88 (-442.1214, -137.16) -> (240.5036, -137.16)
  line L89 (240.5036, -86.36) -> (240.5036, -137.16)
  line L90 (-442.1214, -86.36) -> (240.5036, -86.36)
  line L91 (0, -83.185) -> (25.4, -83.185)
  line L92 (0, -83.185) -> (25.4, -83.185)
  line L93 (25.4, -84.7725) -> (0, -84.7725)
  line L94 (-5.08, -83.185) -> (30.48, -83.185)
  line L95 (-5.08, -83.185) -> (30.48, -83.185)
  line L96 (-5.08, -83.185) -> (30.48, -83.185)
extrude "Plate1" add sketch "Sketch1" along normal blind 3.175 contours L6 L5 L4 A2 L3 A1 L2 A0 L1 L0 | L1 A62 L13 L78 | L42 L75 L25 A15 L24 A14 L23 A13 L22 A12 A59 L21 L73 L9 L5 | L13 A5 L12 A4 L11 A3 L10 L9 L8 L7 | L42 L10 A60 L4 | L2 A61 L12 A62 | L75 L61 A56 L25 | A60 L11 A61 L3 | L75 L44 L73 L65 A49 L64 A48 L63 A47 L62 A46 L61 | A56 L62 A57 L24 | L21 A12 A59 L22 A58 L64 A49 L65 L73 | A57 L63 A58 L23
sketch "Sketch4" plane through (25.4, -83.185, 3.175) normal (0, -1, 0) x (1, 0, 0)
  line L0 (-25.4, 0) -> (0, 0)
  line L1 (0, 0) -> (0, 85.725)
  line L2 (0, 85.725) -> (-25.4, 85.725)
  line L3 (-25.4, 85.725) -> (-25.4, 0)
edge flange "Flange2" height 88.9 angle 90 thickness 3.175 bend radius 1.27 thickness toward (0, -1, 0) relief tear relief width 3.175 relief depth 1.5875 edges at (12.7, -83.185, 3.175) wall of the first edge with corners at (0, -83.185, 3.175) (25.4, -83.185, 3.175) (25.4, -83.185, 88.9) (0, -83.185, 88.9)
bend "Bend2"
corner "Corner2"
sketch "Sketch5" plane through (0, -83.185, 88.9) normal (0, 1, 0) x (1, 0, 0)
  line L0 (0, 84.455) -> (25.4, 0)
  line L1 (0, 0) -> (25.4, 84.455)
  circle A0 centre (12.7, 42.2275) radius 3.3782
  point P0 (0, 88.9)
  dimension "d29" = 6.7564
hole "Hole2" at (12.7, -83.185, 46.6725) direction (0, -1, 0) diameter 6.7564 end through all
equation "\"d35\" = Thickness"
equation "\"d19\" = BendReliefWidth"
equation "\"d20\" = BendReliefDepth"
equation "\"d21\" = MinimumRemnant"
equation "\"d22\" = BendRadius"
equation "\"d26\" = CornerReliefSize"
equation "\"d27\" = GapSize"
equation "\"d28\" = JacobiRadiusSize"
equation "\"BendRadius\" = Thickness"
equation "\"BendReliefWidth\" = Thickness"
equation "\"BendReliefDepth\" = 0.5 * Thickness"
equation "\"CornerReliefSize\" = 4 * Thickness"
equation "\"MinimumRemnant\" = 2 * Thickness"
equation "\"TransitionRadius\" = BendRadius"
equation "\"JacobiRadiusSize\" = BendRadius"
equation "\"GapSize\" = Thickness"
equation "\"d0\" = BendRadius"
equation "\"Thickness\" = 3.175"
properties part number "Angle attach bracket"
